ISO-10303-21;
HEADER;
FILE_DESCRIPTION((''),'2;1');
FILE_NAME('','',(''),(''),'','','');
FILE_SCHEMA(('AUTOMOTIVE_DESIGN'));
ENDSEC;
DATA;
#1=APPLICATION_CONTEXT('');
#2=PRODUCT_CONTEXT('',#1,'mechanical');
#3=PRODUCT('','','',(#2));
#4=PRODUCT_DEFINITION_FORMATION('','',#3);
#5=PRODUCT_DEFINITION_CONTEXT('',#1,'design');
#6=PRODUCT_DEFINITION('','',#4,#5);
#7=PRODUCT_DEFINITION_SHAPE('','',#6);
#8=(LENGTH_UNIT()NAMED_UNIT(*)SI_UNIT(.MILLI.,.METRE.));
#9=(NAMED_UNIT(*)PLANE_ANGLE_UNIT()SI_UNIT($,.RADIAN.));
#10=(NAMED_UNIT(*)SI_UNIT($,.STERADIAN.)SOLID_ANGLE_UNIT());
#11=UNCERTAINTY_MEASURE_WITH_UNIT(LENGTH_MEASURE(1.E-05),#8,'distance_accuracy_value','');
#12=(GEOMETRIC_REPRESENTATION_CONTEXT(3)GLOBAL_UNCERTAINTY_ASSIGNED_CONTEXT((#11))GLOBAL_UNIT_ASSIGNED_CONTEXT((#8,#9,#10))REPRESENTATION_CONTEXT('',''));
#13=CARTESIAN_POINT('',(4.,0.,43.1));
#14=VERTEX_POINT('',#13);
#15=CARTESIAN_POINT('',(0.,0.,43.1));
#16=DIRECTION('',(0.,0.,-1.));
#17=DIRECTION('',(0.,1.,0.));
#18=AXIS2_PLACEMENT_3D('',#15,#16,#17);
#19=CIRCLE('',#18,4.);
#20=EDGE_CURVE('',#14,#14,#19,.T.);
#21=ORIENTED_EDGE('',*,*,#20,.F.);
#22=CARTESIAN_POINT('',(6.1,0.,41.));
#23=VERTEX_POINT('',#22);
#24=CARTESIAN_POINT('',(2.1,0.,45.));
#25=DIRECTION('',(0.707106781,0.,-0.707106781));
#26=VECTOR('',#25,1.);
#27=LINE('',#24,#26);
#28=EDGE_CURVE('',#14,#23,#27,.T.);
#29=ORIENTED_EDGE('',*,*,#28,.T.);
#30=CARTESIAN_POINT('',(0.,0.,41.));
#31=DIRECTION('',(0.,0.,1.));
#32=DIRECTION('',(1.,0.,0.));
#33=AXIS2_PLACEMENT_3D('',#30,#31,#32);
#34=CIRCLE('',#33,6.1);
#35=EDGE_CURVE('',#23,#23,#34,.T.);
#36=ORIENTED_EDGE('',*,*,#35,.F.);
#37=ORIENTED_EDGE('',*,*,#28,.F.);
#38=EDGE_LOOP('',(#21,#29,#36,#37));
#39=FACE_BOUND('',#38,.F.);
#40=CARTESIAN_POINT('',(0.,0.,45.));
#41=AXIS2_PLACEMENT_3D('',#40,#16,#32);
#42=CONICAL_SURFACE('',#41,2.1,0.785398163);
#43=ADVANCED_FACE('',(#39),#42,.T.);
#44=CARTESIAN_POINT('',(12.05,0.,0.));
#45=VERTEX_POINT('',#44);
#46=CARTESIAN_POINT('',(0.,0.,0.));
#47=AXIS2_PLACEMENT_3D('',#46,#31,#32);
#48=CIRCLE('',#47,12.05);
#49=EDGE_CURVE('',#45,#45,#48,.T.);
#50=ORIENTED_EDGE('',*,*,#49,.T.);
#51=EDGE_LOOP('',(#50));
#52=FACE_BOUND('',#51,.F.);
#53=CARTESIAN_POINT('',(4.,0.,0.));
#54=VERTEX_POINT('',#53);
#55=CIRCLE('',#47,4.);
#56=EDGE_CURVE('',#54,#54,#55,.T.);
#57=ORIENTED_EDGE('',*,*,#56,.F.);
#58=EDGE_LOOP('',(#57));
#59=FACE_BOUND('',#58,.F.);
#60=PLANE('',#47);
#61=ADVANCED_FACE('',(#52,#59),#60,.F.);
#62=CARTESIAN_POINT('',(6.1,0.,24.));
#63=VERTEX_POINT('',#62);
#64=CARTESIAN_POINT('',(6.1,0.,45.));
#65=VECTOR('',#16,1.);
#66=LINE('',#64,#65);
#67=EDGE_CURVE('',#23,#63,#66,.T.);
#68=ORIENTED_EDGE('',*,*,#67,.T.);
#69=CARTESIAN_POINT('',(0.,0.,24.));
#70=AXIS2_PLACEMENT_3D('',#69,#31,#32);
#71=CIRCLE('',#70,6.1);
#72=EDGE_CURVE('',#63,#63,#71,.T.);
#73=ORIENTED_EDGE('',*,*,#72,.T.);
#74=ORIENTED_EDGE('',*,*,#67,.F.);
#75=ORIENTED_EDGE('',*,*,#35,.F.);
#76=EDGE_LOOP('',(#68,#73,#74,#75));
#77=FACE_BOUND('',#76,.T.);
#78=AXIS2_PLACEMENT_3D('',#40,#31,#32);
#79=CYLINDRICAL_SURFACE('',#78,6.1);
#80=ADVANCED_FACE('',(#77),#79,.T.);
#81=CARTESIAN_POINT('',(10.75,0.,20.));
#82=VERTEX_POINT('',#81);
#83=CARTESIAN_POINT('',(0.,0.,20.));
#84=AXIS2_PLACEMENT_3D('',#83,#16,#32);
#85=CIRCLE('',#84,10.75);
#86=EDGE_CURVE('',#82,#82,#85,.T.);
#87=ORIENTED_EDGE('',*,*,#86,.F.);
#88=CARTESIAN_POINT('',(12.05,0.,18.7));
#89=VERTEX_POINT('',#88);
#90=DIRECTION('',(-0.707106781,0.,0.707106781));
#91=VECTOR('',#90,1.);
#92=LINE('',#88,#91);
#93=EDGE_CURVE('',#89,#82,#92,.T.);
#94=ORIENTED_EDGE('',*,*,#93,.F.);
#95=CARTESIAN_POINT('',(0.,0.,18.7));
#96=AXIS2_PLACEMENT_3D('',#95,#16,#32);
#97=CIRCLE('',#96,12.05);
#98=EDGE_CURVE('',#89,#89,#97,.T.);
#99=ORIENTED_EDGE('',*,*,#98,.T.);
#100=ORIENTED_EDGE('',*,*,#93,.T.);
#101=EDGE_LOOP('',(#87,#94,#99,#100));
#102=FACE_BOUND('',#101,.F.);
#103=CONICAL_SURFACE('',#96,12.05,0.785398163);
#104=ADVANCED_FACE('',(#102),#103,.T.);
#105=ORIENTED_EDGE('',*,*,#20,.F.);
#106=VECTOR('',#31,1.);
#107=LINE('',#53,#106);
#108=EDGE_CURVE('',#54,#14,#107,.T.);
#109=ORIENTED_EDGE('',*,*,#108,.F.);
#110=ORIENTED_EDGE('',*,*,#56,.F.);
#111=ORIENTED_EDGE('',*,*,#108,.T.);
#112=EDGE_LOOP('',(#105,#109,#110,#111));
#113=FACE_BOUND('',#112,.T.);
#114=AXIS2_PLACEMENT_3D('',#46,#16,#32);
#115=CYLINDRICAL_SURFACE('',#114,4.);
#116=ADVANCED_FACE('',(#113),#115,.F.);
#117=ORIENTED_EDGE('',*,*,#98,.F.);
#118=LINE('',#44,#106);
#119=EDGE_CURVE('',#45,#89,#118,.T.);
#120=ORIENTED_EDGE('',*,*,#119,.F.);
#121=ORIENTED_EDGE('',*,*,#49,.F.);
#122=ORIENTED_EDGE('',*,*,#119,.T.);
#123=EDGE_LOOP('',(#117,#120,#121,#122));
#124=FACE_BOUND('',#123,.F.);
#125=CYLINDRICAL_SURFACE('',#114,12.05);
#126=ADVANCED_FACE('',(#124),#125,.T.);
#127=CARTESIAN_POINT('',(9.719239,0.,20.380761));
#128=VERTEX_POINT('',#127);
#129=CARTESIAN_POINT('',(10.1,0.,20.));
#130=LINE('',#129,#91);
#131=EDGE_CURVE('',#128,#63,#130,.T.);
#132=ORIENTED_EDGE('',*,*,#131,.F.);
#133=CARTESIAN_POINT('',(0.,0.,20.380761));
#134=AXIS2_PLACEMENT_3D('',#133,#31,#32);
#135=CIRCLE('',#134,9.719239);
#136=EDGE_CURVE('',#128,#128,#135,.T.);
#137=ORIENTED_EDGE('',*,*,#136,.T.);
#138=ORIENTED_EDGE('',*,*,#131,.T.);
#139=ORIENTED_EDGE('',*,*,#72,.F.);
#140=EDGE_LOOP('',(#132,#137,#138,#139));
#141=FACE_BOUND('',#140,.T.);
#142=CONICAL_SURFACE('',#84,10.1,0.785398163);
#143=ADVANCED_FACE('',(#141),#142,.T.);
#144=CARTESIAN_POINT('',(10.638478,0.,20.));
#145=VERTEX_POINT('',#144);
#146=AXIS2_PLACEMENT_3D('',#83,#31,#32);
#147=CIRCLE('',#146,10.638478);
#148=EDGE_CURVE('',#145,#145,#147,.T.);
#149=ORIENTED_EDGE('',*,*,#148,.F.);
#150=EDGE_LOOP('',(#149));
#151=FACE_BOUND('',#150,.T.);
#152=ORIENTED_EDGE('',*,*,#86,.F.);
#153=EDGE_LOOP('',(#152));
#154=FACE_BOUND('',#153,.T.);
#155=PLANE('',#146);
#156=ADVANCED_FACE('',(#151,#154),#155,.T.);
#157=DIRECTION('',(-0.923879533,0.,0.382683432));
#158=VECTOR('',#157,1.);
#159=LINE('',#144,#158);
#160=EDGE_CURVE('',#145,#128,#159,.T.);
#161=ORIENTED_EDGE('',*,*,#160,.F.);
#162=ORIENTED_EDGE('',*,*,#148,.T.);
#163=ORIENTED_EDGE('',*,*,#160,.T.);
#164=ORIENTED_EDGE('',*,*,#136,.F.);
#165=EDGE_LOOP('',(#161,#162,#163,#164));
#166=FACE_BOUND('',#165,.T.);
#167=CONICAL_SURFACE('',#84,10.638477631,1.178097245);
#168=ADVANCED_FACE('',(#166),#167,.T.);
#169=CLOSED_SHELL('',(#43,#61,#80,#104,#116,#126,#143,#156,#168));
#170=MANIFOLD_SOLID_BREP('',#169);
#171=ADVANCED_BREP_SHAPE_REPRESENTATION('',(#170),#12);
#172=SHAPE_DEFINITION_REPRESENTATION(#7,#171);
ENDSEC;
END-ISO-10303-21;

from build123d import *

# Parameters (mm, degrees)
F0_R     = 12.05
F0_R_2   = 4
F1_DEPTH = 45
F2_R     = 13.7736211886
F2_R_2   = 6.1
F3_DEPTH = 25


# Not quite as in the source:
# - a fillet or chamfer that OpenCascade refuses, or shapes differently, is made with other operations: its cross-section is extruded or revolved along the edge and cut away or added


with BuildPart() as f1:
    # F0 (on Top) → F1 (new body)
    with BuildSketch(Plane.XY):
        Circle(F0_R)
        Circle(F0_R_2, mode=Mode.SUBTRACT)
    extrude(amount=F1_DEPTH)

    # F2 (on face) → F3 (cut)
    with BuildSketch(Plane.XY.offset(45)):
        Circle(F2_R)
        Circle(F2_R_2, mode=Mode.SUBTRACT)
    extrude(amount=-F3_DEPTH, mode=Mode.SUBTRACT)

    # F4: chamfer of 4 on 3 edges, made by hand

    # F4_s1 → F4_t2 (revolve)
    with BuildSketch(Plane.XZ):
        Polygon((10.1, 20), (6.1, 24), (6.1, 20), align=None)
    revolve(axis=Axis((0, 0, 20), (0, 0, 1)))

    # F4_s3 → F4_t4 (revolve, cut)
    with BuildSketch(Plane.XZ):
        Polygon((2.1, 45), (6.1, 41), (6.1, 45), align=None)
    revolve(axis=Axis((0, 0, 45), (0, 0, 1)), mode=Mode.SUBTRACT)

    # F5: chamfer of 1.3 on 2 edges, made by hand

    # F5_s1 → F5_t2 (revolve)
    with BuildSketch(Plane.XZ):
        Polygon((10.6384776311, 20), (9.7192388155, 20.3807611845), (10.1, 20), align=None)
    revolve(axis=Axis((0, 0, 20), (0, 0, 1)))

    # F5_s3 → F5_t4 (revolve, cut)
    with BuildSketch(Plane.XZ):
        Polygon((12.05, 18.7), (10.75, 20), (12.05, 20), align=None)
    revolve(axis=Axis((0, 0, 20), (0, 0, -1)), mode=Mode.SUBTRACT)


solid = f1.part
